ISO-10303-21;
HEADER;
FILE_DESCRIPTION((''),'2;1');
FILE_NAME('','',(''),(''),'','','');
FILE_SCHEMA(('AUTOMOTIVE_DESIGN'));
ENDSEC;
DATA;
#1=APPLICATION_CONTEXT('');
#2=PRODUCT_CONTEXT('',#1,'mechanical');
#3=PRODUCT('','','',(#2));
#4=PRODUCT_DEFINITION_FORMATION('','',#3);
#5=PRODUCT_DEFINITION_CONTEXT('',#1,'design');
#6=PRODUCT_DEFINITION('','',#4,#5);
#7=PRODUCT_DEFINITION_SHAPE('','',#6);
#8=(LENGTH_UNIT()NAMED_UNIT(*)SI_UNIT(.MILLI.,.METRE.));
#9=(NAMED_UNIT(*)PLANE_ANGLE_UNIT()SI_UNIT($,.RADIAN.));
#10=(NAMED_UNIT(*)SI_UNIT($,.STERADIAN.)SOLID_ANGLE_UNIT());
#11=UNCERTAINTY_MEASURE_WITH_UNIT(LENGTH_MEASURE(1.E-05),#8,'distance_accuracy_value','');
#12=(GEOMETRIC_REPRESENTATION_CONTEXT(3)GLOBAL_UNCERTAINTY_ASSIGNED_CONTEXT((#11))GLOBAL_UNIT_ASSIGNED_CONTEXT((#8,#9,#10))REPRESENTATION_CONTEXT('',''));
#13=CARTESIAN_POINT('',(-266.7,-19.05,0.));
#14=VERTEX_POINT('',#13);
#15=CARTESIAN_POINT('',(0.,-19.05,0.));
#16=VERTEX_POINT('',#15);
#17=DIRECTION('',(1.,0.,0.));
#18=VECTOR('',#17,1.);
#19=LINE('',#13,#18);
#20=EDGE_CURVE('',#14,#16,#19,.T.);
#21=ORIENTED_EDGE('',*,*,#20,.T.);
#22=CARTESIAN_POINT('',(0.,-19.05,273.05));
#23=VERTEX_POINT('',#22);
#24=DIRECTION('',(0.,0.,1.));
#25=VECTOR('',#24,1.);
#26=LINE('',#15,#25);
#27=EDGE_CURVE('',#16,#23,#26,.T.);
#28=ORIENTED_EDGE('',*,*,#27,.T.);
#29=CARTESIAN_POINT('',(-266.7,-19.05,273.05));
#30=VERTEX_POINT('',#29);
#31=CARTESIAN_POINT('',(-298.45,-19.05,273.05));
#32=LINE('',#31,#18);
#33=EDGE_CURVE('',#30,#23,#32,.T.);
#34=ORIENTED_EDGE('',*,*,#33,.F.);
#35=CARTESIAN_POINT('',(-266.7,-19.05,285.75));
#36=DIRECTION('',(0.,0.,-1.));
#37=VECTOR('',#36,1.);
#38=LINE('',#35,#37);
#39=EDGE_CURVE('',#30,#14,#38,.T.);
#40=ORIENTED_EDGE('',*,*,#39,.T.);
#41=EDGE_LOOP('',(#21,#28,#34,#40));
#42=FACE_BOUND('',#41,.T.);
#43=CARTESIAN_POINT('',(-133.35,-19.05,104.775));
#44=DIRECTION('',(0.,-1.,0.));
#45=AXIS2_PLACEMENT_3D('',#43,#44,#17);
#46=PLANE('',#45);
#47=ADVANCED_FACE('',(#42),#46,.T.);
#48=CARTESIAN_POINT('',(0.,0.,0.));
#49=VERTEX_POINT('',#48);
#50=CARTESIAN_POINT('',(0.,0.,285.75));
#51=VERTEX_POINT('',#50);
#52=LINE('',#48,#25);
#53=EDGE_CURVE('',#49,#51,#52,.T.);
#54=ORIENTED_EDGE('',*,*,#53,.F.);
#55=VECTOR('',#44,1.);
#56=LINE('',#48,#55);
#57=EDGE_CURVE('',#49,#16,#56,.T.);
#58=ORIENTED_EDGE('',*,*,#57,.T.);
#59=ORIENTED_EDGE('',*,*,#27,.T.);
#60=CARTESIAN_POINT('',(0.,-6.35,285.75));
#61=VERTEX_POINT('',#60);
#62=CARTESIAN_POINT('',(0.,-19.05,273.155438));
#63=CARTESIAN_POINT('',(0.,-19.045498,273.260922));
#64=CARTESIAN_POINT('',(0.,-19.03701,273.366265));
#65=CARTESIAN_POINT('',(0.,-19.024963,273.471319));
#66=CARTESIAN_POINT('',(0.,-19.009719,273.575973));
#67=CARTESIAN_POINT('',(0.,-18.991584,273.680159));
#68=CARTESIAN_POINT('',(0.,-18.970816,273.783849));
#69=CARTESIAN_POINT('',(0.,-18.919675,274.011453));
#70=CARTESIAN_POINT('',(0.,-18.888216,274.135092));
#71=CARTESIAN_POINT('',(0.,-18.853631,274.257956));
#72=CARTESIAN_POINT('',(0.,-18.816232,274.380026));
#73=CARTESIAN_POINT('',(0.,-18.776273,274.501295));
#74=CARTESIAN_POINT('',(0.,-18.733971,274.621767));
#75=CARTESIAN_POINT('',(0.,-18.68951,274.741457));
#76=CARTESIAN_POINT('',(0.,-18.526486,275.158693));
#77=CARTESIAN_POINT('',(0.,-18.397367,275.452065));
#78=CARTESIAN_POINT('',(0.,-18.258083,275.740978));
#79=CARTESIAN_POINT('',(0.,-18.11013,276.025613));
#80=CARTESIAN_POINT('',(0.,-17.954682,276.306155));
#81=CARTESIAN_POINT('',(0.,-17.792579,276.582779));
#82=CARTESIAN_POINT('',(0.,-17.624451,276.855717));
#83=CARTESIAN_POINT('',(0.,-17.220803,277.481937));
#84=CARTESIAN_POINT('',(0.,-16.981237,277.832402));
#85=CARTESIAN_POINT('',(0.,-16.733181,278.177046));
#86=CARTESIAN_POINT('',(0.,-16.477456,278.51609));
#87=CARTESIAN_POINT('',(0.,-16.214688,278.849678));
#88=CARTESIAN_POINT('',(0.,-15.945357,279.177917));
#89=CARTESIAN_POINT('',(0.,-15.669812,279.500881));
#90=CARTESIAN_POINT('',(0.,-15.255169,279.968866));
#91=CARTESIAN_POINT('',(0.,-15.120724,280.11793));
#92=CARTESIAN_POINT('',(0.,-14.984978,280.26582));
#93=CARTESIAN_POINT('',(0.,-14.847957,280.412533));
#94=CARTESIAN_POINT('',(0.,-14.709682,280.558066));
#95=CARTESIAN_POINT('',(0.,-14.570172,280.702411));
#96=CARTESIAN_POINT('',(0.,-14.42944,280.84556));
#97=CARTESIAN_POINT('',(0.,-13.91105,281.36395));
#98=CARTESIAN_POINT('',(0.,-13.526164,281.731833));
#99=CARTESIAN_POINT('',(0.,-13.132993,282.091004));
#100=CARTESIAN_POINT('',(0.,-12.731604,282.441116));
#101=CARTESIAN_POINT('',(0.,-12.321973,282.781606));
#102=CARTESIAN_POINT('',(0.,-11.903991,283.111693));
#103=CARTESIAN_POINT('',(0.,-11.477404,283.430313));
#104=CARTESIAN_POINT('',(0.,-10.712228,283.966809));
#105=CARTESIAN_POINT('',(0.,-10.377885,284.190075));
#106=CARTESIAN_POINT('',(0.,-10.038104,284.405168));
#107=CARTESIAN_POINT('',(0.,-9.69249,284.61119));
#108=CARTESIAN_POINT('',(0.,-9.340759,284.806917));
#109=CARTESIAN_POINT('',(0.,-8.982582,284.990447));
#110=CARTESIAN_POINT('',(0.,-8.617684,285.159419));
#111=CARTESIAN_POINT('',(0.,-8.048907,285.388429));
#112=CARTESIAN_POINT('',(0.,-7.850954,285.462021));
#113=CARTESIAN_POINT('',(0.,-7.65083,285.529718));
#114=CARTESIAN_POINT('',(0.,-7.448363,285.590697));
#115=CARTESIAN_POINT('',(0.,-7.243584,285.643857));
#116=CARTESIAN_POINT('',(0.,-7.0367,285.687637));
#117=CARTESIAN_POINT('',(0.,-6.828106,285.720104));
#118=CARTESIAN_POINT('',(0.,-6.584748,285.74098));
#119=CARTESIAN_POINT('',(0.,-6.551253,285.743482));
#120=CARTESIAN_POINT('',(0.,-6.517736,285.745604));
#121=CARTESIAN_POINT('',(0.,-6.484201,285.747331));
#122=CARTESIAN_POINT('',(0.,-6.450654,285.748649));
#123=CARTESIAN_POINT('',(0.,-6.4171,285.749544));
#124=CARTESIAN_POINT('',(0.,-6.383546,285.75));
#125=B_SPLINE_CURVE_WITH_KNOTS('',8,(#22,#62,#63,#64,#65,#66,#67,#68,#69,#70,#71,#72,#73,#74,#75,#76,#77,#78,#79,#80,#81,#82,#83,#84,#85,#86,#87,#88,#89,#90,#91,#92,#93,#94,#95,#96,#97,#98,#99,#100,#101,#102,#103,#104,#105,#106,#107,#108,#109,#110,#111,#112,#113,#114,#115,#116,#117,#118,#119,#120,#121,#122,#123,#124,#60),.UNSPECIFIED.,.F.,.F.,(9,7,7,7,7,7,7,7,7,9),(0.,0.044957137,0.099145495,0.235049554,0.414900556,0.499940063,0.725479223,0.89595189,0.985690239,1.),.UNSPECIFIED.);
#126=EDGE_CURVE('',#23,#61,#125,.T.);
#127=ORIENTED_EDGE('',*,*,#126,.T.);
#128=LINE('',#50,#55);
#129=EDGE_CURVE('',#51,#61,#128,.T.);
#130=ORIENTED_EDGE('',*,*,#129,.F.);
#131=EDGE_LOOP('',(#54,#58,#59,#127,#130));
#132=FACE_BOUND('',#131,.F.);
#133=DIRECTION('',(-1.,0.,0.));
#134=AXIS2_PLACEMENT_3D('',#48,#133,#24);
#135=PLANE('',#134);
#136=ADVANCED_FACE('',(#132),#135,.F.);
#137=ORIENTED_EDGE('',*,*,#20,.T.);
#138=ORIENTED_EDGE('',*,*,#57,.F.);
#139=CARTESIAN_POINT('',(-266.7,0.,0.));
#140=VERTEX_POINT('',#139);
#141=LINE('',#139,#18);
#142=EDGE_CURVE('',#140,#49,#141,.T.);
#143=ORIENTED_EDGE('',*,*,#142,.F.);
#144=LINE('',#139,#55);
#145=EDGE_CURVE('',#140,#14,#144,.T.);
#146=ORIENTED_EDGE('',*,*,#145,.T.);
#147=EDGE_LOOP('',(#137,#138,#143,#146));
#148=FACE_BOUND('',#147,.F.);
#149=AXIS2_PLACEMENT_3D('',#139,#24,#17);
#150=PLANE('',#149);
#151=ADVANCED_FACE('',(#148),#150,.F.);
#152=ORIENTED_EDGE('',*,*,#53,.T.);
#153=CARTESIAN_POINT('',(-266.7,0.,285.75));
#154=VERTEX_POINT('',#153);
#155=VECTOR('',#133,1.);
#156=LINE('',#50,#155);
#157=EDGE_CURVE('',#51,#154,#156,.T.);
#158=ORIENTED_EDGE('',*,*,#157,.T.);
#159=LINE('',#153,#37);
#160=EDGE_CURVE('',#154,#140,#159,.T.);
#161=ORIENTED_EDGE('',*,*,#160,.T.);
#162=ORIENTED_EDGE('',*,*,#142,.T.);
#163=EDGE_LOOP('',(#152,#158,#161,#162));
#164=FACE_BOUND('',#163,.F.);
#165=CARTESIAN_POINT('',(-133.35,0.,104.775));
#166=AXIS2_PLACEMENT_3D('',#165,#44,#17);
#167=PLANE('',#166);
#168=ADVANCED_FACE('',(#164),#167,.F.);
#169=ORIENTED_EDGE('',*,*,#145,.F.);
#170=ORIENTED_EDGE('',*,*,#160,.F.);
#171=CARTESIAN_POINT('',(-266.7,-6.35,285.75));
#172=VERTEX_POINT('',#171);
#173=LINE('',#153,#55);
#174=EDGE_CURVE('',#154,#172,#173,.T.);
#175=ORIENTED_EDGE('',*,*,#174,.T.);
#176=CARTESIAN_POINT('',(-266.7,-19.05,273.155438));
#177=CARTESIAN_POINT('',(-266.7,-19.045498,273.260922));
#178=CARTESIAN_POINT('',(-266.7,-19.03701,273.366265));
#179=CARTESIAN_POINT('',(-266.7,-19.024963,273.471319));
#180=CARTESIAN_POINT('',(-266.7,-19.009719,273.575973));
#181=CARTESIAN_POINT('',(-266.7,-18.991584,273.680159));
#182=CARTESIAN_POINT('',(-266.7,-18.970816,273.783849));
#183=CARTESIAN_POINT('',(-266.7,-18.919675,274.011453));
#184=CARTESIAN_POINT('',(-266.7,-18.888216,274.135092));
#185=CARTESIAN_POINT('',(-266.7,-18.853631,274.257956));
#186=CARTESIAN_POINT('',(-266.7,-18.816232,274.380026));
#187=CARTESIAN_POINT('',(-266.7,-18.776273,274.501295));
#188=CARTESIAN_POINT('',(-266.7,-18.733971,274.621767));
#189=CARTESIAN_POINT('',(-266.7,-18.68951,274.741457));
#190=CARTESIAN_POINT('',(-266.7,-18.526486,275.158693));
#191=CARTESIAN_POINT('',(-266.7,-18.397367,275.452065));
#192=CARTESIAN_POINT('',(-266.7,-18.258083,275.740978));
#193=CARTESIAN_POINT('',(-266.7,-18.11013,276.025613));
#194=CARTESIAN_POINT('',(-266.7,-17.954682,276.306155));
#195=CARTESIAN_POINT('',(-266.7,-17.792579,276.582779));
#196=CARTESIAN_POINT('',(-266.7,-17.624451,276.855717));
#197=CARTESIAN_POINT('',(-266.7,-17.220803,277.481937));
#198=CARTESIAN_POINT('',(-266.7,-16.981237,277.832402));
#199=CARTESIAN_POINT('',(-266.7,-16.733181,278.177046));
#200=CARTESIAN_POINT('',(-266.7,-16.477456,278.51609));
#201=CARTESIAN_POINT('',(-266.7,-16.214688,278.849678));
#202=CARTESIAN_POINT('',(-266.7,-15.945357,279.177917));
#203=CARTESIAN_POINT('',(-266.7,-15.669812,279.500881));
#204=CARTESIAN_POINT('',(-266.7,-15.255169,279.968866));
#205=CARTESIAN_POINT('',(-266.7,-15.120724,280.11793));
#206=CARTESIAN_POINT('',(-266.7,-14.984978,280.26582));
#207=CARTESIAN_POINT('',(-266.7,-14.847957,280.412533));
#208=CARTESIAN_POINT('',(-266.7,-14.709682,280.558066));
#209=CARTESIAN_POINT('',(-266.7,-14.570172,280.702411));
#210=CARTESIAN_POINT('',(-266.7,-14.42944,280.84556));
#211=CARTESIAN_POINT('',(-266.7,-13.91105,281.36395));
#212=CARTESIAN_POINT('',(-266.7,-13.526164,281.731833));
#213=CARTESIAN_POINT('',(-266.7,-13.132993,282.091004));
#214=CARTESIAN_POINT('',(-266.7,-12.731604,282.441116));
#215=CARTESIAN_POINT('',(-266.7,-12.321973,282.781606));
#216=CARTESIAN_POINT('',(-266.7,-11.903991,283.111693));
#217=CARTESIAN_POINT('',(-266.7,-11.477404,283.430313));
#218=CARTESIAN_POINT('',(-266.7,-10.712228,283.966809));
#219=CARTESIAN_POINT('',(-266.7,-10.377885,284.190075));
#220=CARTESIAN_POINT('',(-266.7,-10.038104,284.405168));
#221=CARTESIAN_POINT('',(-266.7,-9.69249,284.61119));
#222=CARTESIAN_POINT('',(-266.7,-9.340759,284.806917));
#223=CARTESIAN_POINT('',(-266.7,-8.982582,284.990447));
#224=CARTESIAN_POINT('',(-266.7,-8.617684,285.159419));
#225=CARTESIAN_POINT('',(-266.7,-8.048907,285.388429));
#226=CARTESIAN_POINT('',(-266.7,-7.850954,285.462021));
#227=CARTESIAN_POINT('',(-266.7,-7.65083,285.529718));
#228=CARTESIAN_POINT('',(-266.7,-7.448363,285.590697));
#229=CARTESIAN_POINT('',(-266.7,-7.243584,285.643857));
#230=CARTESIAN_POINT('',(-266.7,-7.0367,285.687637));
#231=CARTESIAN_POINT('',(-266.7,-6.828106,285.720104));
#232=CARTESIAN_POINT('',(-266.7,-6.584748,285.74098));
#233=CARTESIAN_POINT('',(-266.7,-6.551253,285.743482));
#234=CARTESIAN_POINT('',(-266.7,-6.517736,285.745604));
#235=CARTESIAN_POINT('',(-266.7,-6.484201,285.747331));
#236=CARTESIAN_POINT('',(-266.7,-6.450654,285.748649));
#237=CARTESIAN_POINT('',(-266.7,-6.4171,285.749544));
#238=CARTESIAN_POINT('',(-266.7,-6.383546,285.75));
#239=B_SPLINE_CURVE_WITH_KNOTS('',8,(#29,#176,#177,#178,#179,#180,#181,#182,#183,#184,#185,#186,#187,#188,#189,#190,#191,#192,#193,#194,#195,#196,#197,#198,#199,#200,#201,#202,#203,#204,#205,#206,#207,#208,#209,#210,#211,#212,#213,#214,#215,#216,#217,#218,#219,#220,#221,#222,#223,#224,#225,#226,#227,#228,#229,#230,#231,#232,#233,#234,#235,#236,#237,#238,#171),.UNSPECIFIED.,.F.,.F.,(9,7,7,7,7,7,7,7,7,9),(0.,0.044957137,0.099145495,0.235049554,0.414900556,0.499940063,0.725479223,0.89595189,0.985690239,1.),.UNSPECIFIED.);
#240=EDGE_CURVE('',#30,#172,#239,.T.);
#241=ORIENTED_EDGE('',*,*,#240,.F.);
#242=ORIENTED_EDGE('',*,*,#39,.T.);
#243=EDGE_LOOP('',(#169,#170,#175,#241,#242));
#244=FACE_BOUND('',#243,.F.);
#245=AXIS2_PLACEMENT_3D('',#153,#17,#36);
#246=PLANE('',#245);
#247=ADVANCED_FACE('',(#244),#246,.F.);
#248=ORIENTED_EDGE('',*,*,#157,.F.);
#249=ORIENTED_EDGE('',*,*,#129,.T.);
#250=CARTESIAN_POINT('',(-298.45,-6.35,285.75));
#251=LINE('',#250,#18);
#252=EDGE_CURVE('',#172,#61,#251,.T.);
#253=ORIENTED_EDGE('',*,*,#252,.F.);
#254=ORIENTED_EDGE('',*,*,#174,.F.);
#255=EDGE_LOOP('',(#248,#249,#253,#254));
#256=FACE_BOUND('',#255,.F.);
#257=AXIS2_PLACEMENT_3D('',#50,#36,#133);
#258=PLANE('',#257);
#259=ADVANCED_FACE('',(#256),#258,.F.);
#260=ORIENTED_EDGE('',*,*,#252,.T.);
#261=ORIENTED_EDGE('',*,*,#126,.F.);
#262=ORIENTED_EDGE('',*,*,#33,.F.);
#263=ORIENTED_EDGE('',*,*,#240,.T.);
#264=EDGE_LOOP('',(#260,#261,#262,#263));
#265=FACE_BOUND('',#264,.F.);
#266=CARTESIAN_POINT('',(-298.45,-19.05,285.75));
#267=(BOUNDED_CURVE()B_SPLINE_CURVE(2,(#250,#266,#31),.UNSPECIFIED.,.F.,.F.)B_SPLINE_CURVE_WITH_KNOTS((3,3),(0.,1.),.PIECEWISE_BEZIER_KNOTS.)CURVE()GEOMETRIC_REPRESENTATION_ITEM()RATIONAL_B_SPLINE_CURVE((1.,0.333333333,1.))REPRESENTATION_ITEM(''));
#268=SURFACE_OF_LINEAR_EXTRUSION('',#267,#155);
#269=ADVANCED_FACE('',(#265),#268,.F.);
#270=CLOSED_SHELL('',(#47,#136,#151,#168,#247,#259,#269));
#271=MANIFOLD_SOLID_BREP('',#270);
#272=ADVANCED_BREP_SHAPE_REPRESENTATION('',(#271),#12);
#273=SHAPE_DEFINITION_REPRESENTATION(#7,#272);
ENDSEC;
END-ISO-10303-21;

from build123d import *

# Parameters (mm, degrees)
F0_W        = 12.7
F0_H        = 76.2
F0_H_2      = 57.15
F1_DEPTH    = 19.05
F2_T1_DEPTH = 330.2


# Not quite as in the source:
# - a fillet or chamfer that OpenCascade refuses, or shapes differently, is made with other operations: its cross-section is extruded or revolved along the edge and cut away or added


with BuildPart() as f1:
    # F0 (on Front) → F1 (new body)
    with BuildSketch(Plane.XZ):
        Polygon((-266.7, 0), (0, 0), (0, 209.55), (-254, 209.55), (-266.7, 209.55), align=None)
        with Locations((-260.35, 247.65)):
            Rectangle(F0_W, F0_H)
        with Locations((-6.35, 257.175)):
            Rectangle(F0_W, F0_H_2)
        Polygon((-254, 209.55), (0, 209.55), (0, 228.6), (-12.7, 228.6), (-12.7, 285.75), (-254, 285.75), align=None)
    extrude(amount=F1_DEPTH)

    # F2: fillet of radius 12.7 on 1 edges, made by hand

    # F2_s2 → F2_t1 (cut)
    with BuildSketch(Plane.YZ.offset(-298.45)):
        with BuildLine():
            add(Edge.make_bspline(
                [(-6.35, 285.75), (-19.05, 285.75), (-19.05, 273.05)],
                knots=[0, 0, 0, 1, 1, 1], degree=2, weights=[1, 0.3333333333, 1]))
            Line((-19.05, 273.05), (-19.05, 285.75))
            Line((-19.05, 285.75), (-6.35, 285.75))
        make_face()
    extrude(amount=F2_T1_DEPTH, mode=Mode.SUBTRACT)


solid = f1.part
